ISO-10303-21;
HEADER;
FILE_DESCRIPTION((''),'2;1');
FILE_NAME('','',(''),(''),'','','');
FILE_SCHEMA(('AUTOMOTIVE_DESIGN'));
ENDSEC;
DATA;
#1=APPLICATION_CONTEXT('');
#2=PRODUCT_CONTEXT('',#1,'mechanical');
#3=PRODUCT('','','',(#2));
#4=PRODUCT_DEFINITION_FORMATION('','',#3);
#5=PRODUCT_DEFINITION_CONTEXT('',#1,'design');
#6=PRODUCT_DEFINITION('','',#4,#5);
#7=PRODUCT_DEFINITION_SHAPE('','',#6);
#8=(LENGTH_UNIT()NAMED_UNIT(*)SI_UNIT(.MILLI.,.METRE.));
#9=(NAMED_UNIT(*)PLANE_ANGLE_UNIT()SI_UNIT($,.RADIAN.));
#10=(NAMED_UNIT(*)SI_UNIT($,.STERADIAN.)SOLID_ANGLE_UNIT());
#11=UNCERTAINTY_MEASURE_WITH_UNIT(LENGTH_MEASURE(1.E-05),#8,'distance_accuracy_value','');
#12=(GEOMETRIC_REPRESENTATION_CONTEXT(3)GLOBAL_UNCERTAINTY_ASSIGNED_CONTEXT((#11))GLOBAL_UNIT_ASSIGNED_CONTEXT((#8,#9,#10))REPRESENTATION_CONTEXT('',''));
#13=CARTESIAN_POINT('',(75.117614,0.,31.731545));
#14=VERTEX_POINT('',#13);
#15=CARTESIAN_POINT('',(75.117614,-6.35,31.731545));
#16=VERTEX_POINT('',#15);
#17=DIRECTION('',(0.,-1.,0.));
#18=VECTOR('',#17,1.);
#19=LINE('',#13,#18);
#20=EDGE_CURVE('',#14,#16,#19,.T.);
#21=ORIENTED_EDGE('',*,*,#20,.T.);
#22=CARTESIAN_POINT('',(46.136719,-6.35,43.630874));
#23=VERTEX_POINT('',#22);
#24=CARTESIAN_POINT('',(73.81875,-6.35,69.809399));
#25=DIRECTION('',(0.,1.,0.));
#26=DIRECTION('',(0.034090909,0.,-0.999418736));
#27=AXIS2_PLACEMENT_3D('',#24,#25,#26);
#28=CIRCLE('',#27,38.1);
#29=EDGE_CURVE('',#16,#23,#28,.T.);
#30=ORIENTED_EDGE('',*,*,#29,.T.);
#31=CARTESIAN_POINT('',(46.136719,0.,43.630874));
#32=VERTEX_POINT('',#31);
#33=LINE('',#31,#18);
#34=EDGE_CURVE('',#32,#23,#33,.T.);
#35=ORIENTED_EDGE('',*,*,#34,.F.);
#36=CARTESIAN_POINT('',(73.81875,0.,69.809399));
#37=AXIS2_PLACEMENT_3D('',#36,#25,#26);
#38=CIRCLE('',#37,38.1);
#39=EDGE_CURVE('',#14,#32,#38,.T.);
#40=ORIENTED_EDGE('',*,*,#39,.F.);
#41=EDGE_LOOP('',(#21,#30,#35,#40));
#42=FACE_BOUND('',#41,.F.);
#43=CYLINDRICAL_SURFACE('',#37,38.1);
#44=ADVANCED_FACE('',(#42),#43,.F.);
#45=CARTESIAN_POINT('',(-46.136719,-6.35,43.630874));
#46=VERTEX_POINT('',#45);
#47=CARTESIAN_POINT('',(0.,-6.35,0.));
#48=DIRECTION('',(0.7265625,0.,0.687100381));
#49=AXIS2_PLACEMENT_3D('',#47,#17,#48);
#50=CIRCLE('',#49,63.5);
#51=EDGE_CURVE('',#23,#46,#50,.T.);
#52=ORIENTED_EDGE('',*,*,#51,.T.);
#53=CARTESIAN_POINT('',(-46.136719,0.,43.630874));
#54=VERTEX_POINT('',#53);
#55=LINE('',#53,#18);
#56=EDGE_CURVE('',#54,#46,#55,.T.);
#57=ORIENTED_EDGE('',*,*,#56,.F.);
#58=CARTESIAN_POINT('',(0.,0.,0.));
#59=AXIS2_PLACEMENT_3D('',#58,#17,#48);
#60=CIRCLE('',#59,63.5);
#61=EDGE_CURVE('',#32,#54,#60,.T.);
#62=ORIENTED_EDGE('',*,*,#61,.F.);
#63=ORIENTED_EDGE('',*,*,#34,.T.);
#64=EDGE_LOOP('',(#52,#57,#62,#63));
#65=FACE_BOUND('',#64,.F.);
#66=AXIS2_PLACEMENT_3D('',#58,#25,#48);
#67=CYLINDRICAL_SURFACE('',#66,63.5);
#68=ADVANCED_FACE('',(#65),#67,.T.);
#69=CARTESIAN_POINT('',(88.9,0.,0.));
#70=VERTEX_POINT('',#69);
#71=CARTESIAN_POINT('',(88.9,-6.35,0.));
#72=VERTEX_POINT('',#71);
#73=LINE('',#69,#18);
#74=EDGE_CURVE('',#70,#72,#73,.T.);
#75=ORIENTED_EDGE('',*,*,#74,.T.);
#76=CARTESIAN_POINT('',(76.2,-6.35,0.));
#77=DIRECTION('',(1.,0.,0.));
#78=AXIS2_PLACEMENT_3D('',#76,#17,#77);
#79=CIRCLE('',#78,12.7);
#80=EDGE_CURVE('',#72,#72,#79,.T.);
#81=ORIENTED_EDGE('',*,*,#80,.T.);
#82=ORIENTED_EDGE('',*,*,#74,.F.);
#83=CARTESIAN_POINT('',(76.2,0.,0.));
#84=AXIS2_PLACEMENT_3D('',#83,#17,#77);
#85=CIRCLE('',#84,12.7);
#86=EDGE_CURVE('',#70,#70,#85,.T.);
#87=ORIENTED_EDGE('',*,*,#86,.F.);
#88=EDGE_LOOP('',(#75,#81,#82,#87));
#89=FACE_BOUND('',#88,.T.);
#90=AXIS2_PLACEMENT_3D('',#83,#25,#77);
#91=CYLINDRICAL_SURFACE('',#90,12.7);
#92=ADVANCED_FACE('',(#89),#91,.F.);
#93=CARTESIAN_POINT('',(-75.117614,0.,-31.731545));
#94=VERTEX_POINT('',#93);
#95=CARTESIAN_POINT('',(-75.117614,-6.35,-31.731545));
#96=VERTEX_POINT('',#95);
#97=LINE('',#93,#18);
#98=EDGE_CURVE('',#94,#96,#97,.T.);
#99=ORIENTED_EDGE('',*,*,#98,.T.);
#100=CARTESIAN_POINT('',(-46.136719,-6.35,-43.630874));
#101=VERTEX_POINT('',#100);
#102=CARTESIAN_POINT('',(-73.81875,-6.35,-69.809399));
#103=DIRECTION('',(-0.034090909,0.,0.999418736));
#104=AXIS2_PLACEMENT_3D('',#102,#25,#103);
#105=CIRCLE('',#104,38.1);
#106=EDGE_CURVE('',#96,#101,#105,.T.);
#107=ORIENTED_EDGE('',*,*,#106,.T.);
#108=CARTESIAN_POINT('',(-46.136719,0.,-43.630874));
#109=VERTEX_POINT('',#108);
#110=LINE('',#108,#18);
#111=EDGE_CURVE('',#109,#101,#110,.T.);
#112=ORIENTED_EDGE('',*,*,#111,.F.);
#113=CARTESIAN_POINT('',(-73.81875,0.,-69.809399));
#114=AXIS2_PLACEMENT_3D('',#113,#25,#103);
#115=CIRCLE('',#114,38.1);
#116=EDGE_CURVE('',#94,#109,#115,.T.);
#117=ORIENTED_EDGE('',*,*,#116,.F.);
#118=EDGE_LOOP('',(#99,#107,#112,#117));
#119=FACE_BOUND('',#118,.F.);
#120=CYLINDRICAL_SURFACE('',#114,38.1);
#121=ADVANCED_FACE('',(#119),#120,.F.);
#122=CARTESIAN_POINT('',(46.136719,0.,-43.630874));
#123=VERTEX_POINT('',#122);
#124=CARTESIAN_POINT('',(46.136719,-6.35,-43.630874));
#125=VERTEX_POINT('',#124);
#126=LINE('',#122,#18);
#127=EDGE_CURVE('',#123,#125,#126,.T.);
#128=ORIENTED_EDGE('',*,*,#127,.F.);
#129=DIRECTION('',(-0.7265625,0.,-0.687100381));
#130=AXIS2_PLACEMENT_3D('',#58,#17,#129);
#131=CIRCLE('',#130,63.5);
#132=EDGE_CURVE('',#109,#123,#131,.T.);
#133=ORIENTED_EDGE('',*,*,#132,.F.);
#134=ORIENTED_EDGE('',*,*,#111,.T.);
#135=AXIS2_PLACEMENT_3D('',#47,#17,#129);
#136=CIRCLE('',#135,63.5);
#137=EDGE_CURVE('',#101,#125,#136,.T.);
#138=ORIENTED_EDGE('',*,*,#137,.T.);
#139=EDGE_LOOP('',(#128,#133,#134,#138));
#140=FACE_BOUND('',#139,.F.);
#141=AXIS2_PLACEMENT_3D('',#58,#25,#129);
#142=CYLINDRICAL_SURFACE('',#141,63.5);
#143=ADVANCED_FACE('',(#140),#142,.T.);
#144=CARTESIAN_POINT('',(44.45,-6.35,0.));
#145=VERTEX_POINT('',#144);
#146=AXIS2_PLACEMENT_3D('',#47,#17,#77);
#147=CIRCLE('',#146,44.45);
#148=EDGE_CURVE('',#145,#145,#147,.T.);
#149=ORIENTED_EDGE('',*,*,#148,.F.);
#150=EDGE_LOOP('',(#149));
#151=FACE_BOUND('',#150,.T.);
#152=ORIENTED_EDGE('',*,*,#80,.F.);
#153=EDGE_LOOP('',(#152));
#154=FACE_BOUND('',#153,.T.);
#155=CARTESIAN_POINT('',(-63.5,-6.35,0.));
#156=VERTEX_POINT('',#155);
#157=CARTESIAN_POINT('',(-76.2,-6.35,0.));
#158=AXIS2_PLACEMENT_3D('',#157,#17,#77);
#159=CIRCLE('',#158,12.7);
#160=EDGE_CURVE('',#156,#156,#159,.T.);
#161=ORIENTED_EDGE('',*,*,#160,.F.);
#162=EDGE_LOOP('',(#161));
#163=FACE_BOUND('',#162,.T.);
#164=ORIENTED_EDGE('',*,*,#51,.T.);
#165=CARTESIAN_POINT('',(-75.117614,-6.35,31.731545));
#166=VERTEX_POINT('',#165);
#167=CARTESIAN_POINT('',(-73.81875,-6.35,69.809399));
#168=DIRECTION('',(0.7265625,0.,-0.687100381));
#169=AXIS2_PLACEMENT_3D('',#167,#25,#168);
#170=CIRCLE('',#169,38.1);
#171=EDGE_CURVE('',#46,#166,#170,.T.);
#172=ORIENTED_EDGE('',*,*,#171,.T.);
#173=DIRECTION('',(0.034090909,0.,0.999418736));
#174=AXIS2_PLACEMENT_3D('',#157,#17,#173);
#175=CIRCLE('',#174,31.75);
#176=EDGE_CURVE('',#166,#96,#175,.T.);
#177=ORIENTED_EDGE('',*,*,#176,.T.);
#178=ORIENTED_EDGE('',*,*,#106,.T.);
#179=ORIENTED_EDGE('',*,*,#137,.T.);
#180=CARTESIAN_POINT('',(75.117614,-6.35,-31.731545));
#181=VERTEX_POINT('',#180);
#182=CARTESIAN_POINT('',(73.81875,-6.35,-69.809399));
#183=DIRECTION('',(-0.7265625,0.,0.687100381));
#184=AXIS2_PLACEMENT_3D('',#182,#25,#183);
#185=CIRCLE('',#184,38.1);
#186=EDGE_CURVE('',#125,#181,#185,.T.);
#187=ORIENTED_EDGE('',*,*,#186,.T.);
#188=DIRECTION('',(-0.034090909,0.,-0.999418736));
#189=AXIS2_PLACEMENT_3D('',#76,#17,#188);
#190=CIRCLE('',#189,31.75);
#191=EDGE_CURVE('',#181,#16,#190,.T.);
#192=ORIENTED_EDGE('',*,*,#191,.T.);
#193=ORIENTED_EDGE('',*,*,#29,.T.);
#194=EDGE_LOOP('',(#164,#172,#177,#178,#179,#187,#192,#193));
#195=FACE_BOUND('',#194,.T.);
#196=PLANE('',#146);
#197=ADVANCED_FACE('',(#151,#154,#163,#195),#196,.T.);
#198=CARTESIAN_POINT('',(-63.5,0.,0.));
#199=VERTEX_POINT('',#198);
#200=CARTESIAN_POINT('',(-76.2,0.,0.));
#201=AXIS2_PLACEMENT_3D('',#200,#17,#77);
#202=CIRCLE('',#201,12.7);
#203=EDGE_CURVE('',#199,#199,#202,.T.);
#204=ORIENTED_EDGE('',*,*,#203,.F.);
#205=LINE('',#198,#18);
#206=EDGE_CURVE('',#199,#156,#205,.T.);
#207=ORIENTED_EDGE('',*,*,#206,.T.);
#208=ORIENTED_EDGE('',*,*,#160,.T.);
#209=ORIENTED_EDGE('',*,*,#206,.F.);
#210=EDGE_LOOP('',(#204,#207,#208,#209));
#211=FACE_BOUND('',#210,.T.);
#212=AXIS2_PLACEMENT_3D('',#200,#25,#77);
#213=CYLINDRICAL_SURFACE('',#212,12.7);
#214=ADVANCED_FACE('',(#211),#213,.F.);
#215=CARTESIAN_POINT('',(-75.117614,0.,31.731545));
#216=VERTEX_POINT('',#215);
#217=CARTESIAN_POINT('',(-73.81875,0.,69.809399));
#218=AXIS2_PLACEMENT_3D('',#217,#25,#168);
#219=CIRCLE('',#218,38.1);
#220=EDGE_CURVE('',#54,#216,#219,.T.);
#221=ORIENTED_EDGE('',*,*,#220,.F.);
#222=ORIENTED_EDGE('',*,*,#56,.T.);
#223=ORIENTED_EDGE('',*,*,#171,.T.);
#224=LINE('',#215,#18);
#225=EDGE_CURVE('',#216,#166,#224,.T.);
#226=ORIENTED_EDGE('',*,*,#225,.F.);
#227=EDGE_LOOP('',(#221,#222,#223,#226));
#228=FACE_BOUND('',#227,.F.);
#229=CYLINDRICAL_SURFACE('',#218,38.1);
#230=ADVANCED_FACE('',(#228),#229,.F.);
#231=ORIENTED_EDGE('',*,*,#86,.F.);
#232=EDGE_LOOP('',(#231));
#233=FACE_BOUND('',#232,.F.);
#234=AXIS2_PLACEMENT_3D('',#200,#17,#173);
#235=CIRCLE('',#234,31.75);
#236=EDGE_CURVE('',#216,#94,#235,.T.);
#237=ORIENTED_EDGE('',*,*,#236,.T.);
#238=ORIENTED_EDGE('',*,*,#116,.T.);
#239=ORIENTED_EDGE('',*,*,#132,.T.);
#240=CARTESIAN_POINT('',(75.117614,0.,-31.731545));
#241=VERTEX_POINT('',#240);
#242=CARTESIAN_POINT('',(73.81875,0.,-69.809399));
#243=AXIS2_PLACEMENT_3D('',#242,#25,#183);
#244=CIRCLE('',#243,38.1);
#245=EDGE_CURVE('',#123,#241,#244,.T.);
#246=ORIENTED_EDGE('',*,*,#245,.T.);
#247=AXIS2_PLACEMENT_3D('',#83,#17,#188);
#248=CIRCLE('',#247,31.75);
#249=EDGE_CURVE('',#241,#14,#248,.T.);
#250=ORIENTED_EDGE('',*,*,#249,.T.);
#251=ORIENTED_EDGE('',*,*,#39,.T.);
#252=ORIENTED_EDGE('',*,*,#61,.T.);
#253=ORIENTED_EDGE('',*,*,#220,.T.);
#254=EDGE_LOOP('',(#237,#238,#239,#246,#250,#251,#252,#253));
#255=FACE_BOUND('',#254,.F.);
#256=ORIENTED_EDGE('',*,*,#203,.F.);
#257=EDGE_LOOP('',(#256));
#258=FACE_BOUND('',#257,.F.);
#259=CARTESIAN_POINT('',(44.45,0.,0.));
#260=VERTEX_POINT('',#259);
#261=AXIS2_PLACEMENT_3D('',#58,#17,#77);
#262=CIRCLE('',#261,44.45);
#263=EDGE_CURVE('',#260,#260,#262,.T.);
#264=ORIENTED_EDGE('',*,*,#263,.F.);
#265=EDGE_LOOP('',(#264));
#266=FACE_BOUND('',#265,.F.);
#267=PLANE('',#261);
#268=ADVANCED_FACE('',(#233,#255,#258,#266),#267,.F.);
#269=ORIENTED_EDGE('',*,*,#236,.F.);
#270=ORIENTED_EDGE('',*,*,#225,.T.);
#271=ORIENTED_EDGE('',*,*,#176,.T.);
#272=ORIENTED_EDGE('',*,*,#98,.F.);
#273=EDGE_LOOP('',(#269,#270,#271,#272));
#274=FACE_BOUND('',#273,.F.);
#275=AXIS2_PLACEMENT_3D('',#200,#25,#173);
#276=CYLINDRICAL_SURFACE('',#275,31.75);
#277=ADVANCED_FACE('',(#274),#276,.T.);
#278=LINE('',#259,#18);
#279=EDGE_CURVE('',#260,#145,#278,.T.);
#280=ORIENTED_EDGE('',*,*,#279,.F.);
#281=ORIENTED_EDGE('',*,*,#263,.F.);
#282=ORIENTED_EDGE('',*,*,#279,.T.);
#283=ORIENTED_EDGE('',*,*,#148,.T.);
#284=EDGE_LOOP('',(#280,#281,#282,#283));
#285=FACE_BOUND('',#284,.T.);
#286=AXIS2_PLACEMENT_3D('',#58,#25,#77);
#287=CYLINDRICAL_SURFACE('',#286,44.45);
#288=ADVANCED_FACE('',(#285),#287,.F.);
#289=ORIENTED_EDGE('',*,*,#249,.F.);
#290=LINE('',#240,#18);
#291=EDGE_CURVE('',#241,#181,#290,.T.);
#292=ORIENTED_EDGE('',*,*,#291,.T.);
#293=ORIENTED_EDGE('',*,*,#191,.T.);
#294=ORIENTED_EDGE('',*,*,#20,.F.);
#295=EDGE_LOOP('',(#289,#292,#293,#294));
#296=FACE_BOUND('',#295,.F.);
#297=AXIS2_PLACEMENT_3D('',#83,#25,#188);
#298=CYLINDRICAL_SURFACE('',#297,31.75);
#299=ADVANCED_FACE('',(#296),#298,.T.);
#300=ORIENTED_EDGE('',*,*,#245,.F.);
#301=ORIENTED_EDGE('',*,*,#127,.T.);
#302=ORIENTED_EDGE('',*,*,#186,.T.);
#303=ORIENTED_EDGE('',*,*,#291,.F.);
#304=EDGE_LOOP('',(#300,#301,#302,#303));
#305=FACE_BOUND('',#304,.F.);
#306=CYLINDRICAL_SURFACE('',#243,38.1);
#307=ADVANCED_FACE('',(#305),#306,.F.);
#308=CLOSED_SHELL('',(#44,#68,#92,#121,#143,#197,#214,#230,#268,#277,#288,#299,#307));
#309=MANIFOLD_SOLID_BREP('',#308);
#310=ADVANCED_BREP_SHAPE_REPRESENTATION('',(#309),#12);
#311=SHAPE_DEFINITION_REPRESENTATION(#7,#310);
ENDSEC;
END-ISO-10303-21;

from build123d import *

# Parameters (mm, degrees)
F0_R     = 12.7
F0_R_2   = 44.45
F1_DEPTH = 6.35


# Not quite as in the source:
# - a length typed as a fraction of an inch, garbled in the dataset ("3 / 203.2 mm" for 3/8 in), is restored


with BuildPart() as f1:
    # F0 (on Front) → F1 (new body)
    with BuildSketch(Plane.XZ):
        with BuildLine():
            ThreePointArc((-46.13671875, 43.6308741946), (-59.3475236203, 34.5646316236), (-75.1176136364, 31.7315448688))
            ThreePointArc((-75.1176136364, 31.7315448688), (-107.95, 0), (-75.1176136364, -31.7315448688))
            ThreePointArc((-75.1176136364, -31.7315448688), (-59.3475236203, -34.5646316236), (-46.13671875, -43.6308741946))
            ThreePointArc((-46.13671875, -43.6308741946), (0, -63.5), (46.13671875, -43.6308741946))
            ThreePointArc((46.13671875, -43.6308741946), (59.3475236203, -34.5646316236), (75.1176136364, -31.7315448688))
            ThreePointArc((75.1176136364, -31.7315448688), (107.95, 0), (75.1176136364, 31.7315448688))
            ThreePointArc((75.1176136364, 31.7315448688), (59.3475236203, 34.5646316236), (46.13671875, 43.6308741946))
            ThreePointArc((46.13671875, 43.6308741946), (0, 63.5), (-46.13671875, 43.6308741946))
        make_face()
        with Locations((-76.2, 0)):
            Circle(F0_R, mode=Mode.SUBTRACT)
        Circle(F0_R_2, mode=Mode.SUBTRACT)
        with Locations((76.2, 0)):
            Circle(F0_R, mode=Mode.SUBTRACT)
    extrude(amount=F1_DEPTH)


solid = f1.part
